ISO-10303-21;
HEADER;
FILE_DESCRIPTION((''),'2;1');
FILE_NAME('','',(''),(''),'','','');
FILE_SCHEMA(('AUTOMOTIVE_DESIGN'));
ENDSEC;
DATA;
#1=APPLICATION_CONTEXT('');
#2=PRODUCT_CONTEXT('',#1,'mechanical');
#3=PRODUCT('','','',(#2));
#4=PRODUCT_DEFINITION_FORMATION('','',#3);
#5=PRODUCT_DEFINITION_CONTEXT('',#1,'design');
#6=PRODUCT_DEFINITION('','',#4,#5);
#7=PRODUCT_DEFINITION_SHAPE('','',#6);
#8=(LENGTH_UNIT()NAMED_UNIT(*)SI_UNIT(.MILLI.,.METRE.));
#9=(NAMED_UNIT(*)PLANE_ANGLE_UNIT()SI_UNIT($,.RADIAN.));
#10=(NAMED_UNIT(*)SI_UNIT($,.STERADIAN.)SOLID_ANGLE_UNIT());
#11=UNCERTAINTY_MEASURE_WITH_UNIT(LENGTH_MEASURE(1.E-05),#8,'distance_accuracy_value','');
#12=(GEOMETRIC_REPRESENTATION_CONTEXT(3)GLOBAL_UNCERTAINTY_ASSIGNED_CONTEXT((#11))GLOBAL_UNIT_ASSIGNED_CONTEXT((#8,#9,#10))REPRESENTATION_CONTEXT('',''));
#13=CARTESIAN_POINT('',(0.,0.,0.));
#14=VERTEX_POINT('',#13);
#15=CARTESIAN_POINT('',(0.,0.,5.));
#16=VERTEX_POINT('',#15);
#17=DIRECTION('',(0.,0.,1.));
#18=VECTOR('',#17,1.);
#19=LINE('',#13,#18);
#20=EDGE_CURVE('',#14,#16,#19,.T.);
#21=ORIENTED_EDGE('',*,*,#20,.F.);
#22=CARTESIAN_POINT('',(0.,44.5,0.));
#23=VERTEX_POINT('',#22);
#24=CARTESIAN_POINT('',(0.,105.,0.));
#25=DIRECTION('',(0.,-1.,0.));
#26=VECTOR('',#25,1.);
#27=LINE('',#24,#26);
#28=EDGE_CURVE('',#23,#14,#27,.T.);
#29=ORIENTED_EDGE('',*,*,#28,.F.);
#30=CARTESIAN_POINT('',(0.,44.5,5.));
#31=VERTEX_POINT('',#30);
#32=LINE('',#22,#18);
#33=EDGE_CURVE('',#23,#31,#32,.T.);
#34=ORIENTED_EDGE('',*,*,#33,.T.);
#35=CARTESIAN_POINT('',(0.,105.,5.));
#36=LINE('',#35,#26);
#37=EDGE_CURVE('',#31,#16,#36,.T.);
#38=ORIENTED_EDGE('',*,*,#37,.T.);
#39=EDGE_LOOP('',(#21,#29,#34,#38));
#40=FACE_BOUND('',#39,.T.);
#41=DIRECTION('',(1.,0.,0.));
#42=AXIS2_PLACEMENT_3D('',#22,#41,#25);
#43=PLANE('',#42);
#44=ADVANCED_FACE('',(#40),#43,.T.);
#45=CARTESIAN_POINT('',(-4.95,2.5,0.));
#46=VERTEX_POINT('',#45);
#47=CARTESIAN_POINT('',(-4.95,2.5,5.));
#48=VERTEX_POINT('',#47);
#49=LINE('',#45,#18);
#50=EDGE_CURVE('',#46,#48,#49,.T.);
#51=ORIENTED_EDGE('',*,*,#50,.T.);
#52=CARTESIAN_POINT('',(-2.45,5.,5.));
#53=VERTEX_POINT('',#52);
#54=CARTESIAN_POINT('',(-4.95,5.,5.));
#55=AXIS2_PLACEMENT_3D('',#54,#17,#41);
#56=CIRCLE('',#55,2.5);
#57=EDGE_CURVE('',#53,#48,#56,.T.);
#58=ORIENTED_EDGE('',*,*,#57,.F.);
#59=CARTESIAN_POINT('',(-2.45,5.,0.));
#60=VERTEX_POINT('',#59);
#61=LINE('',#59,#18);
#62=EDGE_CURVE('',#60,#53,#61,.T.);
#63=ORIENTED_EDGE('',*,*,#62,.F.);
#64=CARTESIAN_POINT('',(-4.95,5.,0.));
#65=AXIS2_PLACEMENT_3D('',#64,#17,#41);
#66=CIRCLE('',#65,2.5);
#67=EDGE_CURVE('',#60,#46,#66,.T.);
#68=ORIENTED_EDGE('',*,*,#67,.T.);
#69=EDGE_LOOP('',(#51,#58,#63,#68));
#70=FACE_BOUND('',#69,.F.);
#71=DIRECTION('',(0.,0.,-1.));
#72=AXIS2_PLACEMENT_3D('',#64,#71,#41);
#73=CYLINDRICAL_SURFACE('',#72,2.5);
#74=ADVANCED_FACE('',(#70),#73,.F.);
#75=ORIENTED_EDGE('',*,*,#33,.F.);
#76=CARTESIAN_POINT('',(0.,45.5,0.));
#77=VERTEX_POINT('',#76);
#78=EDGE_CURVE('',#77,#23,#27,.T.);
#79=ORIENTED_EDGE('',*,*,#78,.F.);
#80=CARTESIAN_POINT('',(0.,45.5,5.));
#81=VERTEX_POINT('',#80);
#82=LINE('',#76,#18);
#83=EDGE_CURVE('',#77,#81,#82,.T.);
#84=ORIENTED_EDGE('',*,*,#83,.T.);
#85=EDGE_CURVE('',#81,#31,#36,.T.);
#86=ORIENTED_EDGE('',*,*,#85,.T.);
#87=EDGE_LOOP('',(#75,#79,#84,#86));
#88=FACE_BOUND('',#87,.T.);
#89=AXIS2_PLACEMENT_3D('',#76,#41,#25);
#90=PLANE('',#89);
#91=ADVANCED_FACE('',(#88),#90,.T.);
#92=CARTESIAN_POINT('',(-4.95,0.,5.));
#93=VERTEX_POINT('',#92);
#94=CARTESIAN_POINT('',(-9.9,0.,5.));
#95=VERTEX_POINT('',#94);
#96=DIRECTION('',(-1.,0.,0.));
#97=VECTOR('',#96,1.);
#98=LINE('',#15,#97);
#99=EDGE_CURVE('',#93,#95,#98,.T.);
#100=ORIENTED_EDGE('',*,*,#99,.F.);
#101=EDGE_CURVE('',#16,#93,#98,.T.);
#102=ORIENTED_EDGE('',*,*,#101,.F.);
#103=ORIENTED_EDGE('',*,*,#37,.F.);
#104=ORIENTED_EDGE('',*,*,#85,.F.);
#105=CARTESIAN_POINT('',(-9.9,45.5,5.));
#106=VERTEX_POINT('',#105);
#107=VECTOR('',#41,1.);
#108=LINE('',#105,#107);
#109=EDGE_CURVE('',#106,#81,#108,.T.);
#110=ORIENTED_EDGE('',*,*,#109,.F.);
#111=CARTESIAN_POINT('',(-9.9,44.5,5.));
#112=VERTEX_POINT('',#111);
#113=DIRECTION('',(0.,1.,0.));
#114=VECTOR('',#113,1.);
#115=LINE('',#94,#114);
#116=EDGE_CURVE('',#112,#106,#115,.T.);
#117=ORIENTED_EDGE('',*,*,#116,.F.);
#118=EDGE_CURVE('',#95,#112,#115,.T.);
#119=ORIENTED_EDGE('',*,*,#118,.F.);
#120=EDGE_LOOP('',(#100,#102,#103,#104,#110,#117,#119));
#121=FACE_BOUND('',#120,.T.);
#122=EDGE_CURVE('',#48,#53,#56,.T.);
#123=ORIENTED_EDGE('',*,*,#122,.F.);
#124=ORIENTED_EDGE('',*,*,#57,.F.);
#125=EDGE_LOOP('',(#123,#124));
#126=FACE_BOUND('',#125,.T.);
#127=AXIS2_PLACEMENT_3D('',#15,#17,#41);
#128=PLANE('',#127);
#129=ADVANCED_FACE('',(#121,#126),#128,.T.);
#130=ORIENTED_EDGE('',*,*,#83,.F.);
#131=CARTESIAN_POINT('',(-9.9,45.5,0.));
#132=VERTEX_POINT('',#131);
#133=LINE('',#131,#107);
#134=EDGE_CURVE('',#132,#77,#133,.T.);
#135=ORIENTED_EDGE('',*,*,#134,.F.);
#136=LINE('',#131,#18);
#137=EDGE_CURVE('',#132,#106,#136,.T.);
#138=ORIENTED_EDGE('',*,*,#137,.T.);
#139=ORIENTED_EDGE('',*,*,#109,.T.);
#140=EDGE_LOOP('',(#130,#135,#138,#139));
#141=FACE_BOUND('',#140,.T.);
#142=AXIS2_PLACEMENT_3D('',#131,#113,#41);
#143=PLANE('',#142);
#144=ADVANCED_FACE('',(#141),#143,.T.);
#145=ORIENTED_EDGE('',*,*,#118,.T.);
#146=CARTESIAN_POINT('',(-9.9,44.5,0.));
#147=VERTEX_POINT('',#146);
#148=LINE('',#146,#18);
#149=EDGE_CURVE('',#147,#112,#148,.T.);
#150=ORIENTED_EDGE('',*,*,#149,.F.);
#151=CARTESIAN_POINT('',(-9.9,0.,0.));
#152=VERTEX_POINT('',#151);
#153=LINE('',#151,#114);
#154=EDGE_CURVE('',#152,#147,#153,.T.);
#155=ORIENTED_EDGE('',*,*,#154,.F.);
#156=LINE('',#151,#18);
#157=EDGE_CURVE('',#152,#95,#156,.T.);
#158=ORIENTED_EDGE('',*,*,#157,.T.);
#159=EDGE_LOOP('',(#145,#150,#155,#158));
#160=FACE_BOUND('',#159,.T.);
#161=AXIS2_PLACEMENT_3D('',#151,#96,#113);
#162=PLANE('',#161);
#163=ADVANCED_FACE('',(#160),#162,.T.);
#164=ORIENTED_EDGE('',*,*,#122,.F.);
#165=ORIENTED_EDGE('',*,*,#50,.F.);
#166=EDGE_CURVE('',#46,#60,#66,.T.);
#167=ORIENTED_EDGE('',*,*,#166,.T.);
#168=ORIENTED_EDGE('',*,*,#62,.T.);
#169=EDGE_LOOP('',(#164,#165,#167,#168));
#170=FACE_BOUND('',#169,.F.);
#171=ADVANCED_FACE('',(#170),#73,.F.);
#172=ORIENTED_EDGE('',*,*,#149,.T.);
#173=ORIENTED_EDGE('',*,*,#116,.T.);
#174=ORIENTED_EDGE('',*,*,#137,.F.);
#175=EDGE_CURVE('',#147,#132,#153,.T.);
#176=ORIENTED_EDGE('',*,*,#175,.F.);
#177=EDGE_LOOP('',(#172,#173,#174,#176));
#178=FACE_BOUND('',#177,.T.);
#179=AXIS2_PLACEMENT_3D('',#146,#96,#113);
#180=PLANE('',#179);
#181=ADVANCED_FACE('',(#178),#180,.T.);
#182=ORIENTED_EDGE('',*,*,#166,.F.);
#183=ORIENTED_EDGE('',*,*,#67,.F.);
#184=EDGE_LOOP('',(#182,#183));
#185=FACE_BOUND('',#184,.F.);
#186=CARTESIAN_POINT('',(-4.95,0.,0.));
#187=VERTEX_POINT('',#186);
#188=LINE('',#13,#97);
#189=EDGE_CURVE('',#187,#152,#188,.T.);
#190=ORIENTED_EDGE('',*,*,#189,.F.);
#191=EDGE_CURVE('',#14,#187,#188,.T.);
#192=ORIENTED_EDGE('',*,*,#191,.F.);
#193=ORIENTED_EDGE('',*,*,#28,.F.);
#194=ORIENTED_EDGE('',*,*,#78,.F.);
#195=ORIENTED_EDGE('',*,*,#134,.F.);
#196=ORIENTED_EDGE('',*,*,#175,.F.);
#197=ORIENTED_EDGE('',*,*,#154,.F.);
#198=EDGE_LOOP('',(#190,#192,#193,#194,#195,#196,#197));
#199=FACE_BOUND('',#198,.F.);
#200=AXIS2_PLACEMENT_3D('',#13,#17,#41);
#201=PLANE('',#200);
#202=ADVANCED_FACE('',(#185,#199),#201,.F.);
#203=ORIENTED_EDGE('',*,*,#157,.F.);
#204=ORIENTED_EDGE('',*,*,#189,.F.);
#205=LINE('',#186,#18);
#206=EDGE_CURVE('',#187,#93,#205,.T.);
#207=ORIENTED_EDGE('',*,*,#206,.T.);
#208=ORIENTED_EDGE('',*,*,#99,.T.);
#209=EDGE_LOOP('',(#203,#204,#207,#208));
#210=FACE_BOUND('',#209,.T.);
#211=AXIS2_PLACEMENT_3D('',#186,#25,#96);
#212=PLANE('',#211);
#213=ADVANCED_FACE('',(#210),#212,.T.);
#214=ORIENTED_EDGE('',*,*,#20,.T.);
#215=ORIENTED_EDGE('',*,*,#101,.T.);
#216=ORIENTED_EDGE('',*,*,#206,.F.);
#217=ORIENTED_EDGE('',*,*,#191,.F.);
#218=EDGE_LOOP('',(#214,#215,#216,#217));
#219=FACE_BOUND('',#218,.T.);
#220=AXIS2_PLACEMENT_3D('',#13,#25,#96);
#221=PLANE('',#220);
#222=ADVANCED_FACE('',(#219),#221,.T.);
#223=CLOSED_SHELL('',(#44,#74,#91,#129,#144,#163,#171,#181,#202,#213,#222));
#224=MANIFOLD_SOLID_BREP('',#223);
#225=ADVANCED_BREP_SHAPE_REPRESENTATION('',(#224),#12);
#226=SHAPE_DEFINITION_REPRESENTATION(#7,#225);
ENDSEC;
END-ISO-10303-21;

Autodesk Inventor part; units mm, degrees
ref_plane "YZ Plane" through (0, 0, 0) normal (1, 0, 0) x (0, 1, 0)
ref_plane "XZ Plane" through (0, 0, 0) normal (0, 1, 0) x (-1, 0, 0)
ref_plane "XY Plane" through (0, 0, 0) normal (0, 0, 1) x (1, 0, 0)
sketch "Sketch2" plane through (0, 0, 0) normal (0, 0, 1) x (1, 0, 0)
  line L0 (0, 0) -> (-9.9, 0)
  line L1 (-9.9, 0) -> (-9.9, 105)
  line L2 (-9.9, 105) -> (0, 105)
  line L3 (0, 105) -> (0, 0)
  line L4 (-4.95, 0) -> (-4.95, 2.5)
  line L5 (-4.95, 0) -> (-2.45, 0) construction
  circle A0 centre (-4.95, 5) radius 2.5
  line L6 (-4.95, 7.5) -> (32.05, 7.5) construction
  line L7 (0, 44.5) -> (0, 0)
  line L8 (0, 0) -> (-9.9, 0)
  line L9 (-9.9, 0) -> (-9.9, 44.5)
  line L10 (-9.9, 45.5) -> (0, 45.5)
  line L11 (0, 45.5) -> (0, 0)
  line L12 (0, 0) -> (-9.9, 0)
  line L13 (-9.9, 0) -> (-9.9, 45.5)
  dimension "d35" = 5
  dimension "d4" = 9.9
  dimension "d5" = 105
  dimension "d33" = 2.5
  dimension "d34" = 90
extrude "Extrusion5" add sketch "Sketch2" along normal blind 5 contours L0 L1 L10 L3
properties part number "Cube_Holder_EB_V2_(38mm)"
